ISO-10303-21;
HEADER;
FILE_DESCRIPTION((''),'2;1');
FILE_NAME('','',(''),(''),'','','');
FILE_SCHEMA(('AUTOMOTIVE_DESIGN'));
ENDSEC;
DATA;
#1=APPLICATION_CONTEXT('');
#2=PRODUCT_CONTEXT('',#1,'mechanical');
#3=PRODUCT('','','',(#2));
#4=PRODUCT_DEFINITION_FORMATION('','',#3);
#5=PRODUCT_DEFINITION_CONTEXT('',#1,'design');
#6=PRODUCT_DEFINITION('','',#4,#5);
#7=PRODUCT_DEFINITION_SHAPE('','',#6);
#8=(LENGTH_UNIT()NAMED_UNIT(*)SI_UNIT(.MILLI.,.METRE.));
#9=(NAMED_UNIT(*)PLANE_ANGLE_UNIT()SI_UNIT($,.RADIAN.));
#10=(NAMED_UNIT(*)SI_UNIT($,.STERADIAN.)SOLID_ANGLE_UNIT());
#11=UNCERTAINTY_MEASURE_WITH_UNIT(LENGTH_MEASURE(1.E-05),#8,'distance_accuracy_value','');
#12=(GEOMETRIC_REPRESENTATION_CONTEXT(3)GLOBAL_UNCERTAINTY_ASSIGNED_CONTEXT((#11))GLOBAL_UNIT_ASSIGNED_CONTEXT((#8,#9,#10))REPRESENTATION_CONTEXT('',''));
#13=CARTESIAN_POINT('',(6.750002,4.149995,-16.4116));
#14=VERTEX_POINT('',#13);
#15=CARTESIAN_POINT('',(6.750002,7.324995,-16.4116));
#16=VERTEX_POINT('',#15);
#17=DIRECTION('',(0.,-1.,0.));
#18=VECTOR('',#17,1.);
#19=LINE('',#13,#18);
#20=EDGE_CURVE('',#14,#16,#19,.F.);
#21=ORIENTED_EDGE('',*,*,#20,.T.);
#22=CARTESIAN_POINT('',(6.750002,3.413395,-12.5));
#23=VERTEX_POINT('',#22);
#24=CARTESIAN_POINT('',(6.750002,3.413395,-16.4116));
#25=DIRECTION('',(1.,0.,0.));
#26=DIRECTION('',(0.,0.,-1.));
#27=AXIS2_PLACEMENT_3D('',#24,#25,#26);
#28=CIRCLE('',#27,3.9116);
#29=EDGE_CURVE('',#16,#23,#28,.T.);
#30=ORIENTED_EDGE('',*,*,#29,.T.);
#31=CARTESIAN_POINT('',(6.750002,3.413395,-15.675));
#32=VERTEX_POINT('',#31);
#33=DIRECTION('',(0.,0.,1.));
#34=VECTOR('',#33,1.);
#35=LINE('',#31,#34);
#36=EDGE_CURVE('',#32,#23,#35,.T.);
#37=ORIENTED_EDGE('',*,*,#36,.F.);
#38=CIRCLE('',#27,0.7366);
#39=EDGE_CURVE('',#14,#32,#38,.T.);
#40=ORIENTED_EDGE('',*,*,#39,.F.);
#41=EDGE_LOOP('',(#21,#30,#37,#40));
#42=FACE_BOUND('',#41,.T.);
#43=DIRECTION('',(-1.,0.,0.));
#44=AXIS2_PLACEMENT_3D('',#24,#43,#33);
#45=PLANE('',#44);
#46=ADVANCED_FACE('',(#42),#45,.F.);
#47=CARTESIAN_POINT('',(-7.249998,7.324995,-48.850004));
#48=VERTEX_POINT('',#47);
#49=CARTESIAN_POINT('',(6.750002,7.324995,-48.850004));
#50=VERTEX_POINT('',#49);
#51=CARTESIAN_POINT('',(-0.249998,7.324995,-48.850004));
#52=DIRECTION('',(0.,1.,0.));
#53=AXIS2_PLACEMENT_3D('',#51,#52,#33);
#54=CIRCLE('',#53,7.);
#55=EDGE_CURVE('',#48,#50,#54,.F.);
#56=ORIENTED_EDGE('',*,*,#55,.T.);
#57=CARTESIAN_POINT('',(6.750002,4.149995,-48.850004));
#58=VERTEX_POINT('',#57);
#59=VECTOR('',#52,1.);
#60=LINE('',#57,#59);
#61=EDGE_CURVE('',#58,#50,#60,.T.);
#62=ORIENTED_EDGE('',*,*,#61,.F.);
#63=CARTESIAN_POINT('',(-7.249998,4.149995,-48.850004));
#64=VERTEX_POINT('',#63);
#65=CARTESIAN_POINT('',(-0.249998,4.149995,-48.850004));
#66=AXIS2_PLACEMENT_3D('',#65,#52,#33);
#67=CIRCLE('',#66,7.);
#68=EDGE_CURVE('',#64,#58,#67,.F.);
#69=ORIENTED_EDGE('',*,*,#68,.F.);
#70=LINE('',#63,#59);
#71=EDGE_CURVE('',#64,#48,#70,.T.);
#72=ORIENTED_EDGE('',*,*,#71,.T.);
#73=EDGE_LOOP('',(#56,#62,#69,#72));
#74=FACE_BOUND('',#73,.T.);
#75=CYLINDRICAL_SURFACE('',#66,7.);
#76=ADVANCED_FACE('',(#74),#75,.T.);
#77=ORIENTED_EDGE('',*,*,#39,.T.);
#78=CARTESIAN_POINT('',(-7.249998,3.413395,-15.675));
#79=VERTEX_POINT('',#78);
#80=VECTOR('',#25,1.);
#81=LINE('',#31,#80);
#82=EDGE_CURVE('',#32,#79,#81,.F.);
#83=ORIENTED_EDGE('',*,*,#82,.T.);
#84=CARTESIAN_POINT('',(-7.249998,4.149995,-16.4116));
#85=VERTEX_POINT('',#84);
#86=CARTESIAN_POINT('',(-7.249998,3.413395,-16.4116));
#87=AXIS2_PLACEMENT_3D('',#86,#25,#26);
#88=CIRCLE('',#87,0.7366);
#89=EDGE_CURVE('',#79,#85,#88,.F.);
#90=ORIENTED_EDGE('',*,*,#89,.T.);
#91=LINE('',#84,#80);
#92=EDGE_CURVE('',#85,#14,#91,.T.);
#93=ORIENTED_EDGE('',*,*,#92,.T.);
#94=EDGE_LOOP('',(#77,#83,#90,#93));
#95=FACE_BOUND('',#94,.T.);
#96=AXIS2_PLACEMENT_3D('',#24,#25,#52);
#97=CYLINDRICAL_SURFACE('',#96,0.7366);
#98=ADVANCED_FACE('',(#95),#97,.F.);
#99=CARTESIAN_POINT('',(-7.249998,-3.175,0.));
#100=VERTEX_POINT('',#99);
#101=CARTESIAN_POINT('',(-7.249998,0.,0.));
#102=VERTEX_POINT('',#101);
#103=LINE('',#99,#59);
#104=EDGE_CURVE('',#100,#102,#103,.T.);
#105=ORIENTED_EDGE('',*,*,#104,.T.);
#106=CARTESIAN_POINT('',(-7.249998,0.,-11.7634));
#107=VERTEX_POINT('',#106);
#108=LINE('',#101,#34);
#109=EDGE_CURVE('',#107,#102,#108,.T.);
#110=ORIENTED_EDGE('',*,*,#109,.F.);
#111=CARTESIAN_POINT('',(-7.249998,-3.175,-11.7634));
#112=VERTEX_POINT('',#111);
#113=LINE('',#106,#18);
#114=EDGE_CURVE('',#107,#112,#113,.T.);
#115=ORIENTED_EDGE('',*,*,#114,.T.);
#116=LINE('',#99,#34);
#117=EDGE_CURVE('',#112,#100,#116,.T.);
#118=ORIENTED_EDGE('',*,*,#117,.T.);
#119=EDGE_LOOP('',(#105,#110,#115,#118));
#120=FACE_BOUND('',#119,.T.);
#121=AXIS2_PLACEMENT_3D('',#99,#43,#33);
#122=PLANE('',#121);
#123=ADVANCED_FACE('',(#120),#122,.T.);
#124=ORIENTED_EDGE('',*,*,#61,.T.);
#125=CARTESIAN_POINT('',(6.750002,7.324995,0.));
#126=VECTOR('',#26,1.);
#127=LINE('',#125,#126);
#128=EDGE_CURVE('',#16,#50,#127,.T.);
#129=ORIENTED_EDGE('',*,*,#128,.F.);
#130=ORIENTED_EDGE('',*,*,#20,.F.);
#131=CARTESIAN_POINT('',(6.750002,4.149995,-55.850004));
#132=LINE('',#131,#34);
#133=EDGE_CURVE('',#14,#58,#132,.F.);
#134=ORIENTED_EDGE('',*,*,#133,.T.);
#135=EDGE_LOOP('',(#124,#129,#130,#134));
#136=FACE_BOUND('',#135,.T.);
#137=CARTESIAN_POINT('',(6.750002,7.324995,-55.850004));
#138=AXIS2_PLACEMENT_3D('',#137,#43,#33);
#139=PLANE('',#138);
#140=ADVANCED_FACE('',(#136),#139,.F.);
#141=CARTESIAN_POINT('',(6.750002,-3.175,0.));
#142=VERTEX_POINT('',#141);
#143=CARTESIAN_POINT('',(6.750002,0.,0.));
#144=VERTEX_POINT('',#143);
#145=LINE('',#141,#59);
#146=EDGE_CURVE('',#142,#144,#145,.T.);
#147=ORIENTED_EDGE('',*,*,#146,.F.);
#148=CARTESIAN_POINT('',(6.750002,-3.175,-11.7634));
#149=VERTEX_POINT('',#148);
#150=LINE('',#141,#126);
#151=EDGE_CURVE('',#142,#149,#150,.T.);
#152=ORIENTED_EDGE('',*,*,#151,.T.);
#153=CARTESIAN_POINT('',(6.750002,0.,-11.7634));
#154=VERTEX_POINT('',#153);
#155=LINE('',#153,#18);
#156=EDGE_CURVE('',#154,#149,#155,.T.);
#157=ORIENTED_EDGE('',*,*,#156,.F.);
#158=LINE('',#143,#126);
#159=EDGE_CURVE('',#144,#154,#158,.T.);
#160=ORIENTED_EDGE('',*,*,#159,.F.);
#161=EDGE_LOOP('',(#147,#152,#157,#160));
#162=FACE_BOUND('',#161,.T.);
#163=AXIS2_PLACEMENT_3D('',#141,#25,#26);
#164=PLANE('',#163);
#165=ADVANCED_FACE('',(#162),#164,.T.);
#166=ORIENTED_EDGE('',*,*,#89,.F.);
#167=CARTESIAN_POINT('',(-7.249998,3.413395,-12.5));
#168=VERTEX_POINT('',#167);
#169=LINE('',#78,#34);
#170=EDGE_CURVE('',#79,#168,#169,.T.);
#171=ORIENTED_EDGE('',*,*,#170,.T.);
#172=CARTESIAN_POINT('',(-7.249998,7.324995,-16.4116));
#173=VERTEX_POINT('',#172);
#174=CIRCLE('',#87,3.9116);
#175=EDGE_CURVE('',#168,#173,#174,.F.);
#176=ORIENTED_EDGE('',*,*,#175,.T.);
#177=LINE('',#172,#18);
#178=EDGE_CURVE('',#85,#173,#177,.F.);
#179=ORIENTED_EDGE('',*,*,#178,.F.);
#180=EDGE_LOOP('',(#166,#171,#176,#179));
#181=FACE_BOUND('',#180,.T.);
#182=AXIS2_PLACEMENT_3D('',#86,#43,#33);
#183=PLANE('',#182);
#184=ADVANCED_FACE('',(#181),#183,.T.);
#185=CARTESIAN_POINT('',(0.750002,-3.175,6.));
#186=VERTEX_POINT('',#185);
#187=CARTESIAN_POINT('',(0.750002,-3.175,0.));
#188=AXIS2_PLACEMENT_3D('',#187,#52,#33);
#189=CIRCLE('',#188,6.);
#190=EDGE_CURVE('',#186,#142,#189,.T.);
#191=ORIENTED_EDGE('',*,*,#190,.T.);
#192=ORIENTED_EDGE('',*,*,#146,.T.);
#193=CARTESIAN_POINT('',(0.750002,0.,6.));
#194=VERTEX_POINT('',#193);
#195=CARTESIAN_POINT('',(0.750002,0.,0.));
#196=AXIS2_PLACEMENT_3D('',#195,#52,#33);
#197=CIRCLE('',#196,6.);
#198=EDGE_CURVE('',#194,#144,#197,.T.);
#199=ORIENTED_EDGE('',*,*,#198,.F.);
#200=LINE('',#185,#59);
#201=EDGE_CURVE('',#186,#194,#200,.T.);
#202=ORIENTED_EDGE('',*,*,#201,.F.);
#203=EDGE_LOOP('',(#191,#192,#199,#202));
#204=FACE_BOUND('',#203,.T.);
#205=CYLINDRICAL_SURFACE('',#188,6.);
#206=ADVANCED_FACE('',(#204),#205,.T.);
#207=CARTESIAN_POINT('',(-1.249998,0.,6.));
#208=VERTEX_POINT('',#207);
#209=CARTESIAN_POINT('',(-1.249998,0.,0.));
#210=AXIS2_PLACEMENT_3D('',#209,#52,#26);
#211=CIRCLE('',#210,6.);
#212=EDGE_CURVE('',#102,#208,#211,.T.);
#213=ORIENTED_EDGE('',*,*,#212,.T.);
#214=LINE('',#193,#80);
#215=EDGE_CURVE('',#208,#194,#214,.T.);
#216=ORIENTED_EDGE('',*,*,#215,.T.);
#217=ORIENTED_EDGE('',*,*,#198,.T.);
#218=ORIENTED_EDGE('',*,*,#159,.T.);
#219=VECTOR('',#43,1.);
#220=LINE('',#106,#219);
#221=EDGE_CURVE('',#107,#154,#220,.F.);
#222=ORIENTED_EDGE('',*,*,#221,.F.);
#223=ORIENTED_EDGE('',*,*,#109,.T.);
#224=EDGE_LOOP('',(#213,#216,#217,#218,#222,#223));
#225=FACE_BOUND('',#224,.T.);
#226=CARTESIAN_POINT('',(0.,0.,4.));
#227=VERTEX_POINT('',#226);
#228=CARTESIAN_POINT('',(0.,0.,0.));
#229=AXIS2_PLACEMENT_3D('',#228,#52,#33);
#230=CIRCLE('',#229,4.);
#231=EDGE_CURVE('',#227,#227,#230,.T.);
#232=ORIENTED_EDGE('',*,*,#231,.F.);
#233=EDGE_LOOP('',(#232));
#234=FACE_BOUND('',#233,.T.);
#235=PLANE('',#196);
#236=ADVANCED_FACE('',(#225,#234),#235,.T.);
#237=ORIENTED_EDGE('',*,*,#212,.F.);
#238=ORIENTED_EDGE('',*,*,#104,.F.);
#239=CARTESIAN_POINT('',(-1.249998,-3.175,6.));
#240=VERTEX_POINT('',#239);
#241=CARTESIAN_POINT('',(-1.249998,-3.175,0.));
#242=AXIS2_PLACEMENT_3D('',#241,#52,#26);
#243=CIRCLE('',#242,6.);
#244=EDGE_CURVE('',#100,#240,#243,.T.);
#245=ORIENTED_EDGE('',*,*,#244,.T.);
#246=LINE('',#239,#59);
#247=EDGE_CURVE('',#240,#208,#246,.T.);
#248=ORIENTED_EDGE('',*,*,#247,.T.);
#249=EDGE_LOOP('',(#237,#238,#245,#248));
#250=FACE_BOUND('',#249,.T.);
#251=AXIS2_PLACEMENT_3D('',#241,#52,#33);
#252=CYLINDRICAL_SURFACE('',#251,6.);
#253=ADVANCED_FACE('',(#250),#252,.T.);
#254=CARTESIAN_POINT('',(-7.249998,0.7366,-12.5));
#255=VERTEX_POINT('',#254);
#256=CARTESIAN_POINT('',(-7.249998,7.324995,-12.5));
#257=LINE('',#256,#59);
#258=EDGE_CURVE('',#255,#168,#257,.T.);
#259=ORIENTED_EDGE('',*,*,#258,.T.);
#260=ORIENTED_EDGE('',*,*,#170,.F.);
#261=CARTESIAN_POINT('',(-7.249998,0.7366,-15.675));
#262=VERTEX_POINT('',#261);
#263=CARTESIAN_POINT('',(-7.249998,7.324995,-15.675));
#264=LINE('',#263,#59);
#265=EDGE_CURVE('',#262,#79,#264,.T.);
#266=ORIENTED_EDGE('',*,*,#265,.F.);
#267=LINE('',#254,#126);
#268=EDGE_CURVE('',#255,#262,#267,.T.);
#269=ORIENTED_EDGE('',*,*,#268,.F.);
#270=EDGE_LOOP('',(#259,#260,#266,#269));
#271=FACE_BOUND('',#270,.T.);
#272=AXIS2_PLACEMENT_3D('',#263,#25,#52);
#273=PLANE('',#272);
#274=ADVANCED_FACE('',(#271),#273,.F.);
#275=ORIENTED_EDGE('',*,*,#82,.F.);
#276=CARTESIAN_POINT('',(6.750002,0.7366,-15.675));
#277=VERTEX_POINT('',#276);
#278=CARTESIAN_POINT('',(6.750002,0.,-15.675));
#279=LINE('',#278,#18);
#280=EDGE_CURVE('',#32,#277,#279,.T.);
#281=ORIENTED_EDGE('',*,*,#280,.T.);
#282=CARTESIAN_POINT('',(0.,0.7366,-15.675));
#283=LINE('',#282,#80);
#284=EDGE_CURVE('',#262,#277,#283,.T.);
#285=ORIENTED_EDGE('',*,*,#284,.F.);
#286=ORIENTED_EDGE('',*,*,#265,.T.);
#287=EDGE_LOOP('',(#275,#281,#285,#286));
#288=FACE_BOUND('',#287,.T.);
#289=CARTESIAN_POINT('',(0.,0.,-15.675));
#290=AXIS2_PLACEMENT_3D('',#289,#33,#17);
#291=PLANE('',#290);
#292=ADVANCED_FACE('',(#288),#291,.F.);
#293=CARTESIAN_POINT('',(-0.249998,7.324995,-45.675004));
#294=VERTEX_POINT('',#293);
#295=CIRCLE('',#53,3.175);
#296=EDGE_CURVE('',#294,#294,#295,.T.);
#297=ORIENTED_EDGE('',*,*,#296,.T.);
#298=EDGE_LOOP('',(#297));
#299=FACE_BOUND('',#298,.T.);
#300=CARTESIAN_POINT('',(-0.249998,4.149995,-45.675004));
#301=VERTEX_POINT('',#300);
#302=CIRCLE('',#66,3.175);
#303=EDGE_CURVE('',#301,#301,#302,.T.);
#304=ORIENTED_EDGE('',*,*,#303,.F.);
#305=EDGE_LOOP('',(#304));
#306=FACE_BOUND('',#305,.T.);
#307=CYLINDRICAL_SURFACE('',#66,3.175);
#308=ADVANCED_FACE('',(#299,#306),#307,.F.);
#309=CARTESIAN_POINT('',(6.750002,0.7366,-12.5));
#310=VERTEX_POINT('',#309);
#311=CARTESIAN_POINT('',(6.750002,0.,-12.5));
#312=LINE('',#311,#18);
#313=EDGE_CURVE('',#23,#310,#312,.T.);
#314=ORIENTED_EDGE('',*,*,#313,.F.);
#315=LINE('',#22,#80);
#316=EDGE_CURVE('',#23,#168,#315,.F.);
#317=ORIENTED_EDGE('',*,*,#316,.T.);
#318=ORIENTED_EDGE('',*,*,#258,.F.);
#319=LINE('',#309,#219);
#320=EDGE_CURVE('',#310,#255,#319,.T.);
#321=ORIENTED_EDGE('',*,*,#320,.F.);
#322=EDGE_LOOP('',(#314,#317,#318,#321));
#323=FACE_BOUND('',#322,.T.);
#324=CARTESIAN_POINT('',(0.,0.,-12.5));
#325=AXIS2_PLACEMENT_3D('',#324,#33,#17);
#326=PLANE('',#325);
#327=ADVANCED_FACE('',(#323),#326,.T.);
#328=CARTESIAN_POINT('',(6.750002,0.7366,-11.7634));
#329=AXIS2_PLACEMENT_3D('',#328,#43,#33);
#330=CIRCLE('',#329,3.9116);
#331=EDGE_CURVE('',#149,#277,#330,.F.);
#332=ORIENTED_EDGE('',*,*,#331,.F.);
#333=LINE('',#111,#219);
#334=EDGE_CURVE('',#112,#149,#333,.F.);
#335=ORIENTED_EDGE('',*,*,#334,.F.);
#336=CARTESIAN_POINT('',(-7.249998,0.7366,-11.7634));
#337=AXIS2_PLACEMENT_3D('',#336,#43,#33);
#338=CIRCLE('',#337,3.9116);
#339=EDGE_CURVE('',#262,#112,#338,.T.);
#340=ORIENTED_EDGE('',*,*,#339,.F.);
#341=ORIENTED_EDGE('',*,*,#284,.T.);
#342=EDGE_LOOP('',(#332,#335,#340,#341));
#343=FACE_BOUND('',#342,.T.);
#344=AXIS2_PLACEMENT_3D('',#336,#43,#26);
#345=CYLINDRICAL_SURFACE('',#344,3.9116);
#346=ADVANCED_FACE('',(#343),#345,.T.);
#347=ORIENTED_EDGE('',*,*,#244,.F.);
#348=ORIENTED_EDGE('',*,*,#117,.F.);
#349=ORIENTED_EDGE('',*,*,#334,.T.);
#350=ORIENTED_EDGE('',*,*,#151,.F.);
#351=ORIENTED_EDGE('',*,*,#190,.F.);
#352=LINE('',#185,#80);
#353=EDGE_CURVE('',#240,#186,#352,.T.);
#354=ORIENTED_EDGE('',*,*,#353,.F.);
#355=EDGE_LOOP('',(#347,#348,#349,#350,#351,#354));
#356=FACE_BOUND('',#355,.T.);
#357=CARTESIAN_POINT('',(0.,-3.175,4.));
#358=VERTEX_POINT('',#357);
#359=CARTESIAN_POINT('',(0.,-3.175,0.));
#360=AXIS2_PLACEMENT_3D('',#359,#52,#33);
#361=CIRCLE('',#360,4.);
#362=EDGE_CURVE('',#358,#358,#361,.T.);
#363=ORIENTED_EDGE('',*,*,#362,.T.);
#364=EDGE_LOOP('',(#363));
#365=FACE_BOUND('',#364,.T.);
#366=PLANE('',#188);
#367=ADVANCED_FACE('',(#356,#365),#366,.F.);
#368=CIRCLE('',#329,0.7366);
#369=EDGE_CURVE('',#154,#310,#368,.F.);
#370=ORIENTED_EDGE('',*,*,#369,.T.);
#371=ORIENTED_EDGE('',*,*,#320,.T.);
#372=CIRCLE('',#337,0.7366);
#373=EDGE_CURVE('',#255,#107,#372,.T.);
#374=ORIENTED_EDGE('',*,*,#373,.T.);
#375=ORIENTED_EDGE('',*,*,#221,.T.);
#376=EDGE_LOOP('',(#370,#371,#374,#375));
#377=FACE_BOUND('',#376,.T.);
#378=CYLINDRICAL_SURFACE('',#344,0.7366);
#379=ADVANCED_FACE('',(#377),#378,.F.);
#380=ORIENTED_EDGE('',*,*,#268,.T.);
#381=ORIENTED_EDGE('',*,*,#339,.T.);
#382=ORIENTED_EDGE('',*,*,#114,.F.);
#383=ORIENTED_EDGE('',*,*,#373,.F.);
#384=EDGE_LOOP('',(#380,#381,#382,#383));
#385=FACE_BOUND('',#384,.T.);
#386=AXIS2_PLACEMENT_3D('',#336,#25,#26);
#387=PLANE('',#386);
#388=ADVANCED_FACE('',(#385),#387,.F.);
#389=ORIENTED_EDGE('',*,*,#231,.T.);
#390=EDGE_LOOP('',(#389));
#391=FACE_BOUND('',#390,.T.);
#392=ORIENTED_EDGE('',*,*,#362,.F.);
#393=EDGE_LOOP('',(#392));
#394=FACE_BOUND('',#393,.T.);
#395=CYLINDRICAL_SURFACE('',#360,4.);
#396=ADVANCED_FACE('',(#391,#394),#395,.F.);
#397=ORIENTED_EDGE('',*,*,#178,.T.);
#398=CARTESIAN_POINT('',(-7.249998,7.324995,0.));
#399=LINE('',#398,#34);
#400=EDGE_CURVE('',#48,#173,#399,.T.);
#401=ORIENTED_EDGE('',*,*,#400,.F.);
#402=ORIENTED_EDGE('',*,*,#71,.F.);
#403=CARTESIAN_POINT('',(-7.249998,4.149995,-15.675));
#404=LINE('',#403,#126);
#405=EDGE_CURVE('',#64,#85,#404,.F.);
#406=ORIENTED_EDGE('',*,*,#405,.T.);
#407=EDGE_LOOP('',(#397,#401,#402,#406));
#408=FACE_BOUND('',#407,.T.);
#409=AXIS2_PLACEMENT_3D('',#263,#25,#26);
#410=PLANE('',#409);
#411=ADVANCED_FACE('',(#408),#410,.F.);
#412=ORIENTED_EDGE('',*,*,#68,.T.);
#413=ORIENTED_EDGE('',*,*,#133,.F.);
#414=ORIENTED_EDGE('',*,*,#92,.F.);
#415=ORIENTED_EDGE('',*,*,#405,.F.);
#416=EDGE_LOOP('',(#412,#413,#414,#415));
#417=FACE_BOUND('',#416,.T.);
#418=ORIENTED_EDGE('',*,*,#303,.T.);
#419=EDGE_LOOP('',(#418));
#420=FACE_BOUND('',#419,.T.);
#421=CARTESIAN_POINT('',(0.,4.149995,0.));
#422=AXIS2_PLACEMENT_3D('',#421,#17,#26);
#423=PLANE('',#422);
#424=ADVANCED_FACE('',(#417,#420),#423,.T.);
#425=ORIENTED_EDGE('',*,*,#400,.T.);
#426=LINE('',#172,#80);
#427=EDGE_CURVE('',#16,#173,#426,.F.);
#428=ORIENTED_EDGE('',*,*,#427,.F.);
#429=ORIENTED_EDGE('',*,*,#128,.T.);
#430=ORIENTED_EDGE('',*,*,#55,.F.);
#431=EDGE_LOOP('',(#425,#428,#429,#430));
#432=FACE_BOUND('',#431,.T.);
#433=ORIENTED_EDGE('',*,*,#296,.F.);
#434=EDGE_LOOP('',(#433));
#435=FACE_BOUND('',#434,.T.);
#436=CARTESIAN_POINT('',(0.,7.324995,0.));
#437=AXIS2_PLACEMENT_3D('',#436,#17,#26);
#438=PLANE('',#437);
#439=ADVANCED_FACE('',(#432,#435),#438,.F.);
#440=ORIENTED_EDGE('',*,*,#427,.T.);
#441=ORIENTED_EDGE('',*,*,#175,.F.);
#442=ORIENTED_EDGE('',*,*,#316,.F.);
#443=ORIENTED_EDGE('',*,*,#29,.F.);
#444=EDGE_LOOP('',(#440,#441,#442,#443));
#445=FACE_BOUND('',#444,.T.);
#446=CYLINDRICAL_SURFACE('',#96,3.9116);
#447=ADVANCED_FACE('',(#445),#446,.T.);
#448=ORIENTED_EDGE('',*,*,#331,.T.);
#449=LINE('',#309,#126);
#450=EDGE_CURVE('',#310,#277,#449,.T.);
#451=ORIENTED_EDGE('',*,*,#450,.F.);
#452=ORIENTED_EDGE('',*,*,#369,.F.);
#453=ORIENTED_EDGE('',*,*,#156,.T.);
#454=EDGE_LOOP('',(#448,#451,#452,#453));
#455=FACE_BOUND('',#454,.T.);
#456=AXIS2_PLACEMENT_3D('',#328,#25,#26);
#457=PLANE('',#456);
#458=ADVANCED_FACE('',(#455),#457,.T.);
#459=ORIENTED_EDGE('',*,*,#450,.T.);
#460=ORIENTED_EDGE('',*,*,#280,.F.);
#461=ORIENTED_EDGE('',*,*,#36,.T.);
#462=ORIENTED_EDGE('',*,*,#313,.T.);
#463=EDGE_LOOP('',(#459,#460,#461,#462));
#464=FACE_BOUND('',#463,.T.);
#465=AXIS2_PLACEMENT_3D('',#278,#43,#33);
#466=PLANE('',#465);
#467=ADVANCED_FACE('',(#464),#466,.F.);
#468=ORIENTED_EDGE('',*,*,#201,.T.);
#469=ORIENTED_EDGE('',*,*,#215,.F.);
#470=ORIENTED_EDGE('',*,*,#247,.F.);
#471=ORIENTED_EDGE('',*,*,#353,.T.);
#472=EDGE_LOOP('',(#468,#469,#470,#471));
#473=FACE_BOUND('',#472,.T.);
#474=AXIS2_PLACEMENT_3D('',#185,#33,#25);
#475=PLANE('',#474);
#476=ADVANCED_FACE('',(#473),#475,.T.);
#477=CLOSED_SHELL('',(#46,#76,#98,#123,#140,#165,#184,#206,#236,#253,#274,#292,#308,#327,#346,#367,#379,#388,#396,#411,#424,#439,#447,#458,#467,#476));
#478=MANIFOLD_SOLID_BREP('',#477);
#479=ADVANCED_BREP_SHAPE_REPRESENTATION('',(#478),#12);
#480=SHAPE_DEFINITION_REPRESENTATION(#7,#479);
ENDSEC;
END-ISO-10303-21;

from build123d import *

# Parameters (mm, degrees)
SKETCH1_R                    = 4
BASE_FLANGE1_DEPTH           = 3.175
EDGE_FLANGE1_STRIP_W         = 14.1732
EDGE_FLANGE1_STRIP_H         = 3.175
EDGE_FLANGE1_STRIP_CUT_DEPTH = 14
EDGE_FLANGE1_DEPTH           = 14
EDGE_FLANGE2_STRIP_W         = 14.1732
EDGE_FLANGE2_STRIP_H         = 3.175
EDGE_FLANGE2_STRIP_CUT_DEPTH = 14
EDGE_FLANGE2_DEPTH           = 14
SKETCH17_R                   = 3.175
CUT_EXTRUDE1_DEPTH           = 3.175


# Sheet-metal steps are written as plain solids
with BuildPart() as part:
    # Sketch1 → Base-Flange1 (new body)
    with BuildSketch(Plane(origin=(0, 0, 0), x_dir=(1, 0, 0), z_dir=(0, 1, 0))):
        with BuildLine():
            Line((6.750002463, 0), (6.750002463, 12.5))
            Line((6.750002463, 12.5), (-7.249997537, 12.5))
            Line((-7.249997537, 12.5), (-7.249997537, 0))
            ThreePointArc((-7.249997537, 0), (-5.492638224, -4.242640687), (-1.249997537, -6))
            Line((-1.249997537, -6), (0.750002463, -6))
            ThreePointArc((0.750002463, -6), (4.99264315, -4.242640687), (6.750002463, 0))
        make_face()
        with Locations(Location((0, 0, 0), (0, 0, 270))):
            Circle(SKETCH1_R, mode=Mode.SUBTRACT)
    extrude(amount=-BASE_FLANGE1_DEPTH)

    # Edge-Flange1 strip (across the edge) → Edge-Flange1 strip cut (cut)
    with BuildSketch(Plane(origin=(6.750002463, 0, -12.5), x_dir=(0, 0, 1), z_dir=(-1, 0, 0))):
        with Locations((-6.35, -1.5875)):
            Rectangle(EDGE_FLANGE1_STRIP_W, EDGE_FLANGE1_STRIP_H)
    extrude(amount=EDGE_FLANGE1_STRIP_CUT_DEPTH, mode=Mode.SUBTRACT)

    # Edge-Flange1 section (across the edge) → Edge-Flange1 (add)
    with BuildSketch(Plane(origin=(6.750002463, 0, -12.5), x_dir=(0, 0, 1), z_dir=(-1, 0, 0))):
        with BuildLine():
            Line((-3.175, 0.7366), (-3.175, 7.324994814))
            Line((-3.175, 7.324994814), (0, 7.324994814))
            Line((0, 7.324994814), (0, 0.7366))
            ThreePointArc((0, 0.7366), (0.215745145, 0.215745145), (0.7366, 0))
            Line((0.7366, 0), (0.7366, -3.175))
            ThreePointArc((0.7366, -3.175), (-2.029318885, -2.029318885), (-3.175, 0.7366))
        make_face()
    extrude(amount=EDGE_FLANGE1_DEPTH)

    # Edge-Flange2 strip (across the edge) → Edge-Flange2 strip cut (cut)
    with BuildSketch(Plane(origin=(-7.249997537, 7.324994814, -15.675), x_dir=(0, -1, 0), z_dir=(1, 0, 0))):
        with Locations((-3.175, -1.5875)):
            Rectangle(EDGE_FLANGE2_STRIP_W, EDGE_FLANGE2_STRIP_H)
    extrude(amount=EDGE_FLANGE2_STRIP_CUT_DEPTH, mode=Mode.SUBTRACT)

    # Edge-Flange2 section (across the edge) → Edge-Flange2 (add)
    with BuildSketch(Plane(origin=(-7.249997537, 7.324994814, -15.675), x_dir=(0, -1, 0), z_dir=(1, 0, 0))):
        with BuildLine():
            Line((0, 0.7366), (0, 40.175004419))
            Line((0, 40.175004419), (3.175, 40.175004419))
            Line((3.175, 40.175004419), (3.175, 0.7366))
            ThreePointArc((3.175, 0.7366), (3.390745145, 0.215745145), (3.9116, 0))
            Line((3.9116, 0), (3.9116, -3.175))
            ThreePointArc((3.9116, -3.175), (1.145681115, -2.029318885), (0, 0.7366))
        make_face()
    extrude(amount=EDGE_FLANGE2_DEPTH)

    # Sketch17 → Cut-Extrude1 (cut)
    with BuildSketch(Plane(origin=(0, 7.324994814, 0), x_dir=(1, 0, 0), z_dir=(0, 1, 0))):
        with BuildLine():
            ThreePointArc((-7.249997537, 48.850004419), (-5.199745006, 53.799751887), (-0.249997537, 55.850004419))
            Line((-0.249997537, 55.850004419), (-7.249997537, 55.850004419))
            Line((-7.249997537, 55.850004419), (-7.249997537, 48.850004419))
        make_face()
        with BuildLine():
            ThreePointArc((-0.249997537, 55.850004419), (4.699749931, 53.799751887), (6.750002463, 48.850004419))
            Line((6.750002463, 48.850004419), (6.750002463, 55.850004419))
            Line((6.750002463, 55.850004419), (-0.249997537, 55.850004419))
        make_face()
        with Locations(Location((-0.249997537, 48.850004419, 0), (0, 0, 270))):
            Circle(SKETCH17_R)
    extrude(amount=-CUT_EXTRUDE1_DEPTH, mode=Mode.SUBTRACT)


solid = part.part
